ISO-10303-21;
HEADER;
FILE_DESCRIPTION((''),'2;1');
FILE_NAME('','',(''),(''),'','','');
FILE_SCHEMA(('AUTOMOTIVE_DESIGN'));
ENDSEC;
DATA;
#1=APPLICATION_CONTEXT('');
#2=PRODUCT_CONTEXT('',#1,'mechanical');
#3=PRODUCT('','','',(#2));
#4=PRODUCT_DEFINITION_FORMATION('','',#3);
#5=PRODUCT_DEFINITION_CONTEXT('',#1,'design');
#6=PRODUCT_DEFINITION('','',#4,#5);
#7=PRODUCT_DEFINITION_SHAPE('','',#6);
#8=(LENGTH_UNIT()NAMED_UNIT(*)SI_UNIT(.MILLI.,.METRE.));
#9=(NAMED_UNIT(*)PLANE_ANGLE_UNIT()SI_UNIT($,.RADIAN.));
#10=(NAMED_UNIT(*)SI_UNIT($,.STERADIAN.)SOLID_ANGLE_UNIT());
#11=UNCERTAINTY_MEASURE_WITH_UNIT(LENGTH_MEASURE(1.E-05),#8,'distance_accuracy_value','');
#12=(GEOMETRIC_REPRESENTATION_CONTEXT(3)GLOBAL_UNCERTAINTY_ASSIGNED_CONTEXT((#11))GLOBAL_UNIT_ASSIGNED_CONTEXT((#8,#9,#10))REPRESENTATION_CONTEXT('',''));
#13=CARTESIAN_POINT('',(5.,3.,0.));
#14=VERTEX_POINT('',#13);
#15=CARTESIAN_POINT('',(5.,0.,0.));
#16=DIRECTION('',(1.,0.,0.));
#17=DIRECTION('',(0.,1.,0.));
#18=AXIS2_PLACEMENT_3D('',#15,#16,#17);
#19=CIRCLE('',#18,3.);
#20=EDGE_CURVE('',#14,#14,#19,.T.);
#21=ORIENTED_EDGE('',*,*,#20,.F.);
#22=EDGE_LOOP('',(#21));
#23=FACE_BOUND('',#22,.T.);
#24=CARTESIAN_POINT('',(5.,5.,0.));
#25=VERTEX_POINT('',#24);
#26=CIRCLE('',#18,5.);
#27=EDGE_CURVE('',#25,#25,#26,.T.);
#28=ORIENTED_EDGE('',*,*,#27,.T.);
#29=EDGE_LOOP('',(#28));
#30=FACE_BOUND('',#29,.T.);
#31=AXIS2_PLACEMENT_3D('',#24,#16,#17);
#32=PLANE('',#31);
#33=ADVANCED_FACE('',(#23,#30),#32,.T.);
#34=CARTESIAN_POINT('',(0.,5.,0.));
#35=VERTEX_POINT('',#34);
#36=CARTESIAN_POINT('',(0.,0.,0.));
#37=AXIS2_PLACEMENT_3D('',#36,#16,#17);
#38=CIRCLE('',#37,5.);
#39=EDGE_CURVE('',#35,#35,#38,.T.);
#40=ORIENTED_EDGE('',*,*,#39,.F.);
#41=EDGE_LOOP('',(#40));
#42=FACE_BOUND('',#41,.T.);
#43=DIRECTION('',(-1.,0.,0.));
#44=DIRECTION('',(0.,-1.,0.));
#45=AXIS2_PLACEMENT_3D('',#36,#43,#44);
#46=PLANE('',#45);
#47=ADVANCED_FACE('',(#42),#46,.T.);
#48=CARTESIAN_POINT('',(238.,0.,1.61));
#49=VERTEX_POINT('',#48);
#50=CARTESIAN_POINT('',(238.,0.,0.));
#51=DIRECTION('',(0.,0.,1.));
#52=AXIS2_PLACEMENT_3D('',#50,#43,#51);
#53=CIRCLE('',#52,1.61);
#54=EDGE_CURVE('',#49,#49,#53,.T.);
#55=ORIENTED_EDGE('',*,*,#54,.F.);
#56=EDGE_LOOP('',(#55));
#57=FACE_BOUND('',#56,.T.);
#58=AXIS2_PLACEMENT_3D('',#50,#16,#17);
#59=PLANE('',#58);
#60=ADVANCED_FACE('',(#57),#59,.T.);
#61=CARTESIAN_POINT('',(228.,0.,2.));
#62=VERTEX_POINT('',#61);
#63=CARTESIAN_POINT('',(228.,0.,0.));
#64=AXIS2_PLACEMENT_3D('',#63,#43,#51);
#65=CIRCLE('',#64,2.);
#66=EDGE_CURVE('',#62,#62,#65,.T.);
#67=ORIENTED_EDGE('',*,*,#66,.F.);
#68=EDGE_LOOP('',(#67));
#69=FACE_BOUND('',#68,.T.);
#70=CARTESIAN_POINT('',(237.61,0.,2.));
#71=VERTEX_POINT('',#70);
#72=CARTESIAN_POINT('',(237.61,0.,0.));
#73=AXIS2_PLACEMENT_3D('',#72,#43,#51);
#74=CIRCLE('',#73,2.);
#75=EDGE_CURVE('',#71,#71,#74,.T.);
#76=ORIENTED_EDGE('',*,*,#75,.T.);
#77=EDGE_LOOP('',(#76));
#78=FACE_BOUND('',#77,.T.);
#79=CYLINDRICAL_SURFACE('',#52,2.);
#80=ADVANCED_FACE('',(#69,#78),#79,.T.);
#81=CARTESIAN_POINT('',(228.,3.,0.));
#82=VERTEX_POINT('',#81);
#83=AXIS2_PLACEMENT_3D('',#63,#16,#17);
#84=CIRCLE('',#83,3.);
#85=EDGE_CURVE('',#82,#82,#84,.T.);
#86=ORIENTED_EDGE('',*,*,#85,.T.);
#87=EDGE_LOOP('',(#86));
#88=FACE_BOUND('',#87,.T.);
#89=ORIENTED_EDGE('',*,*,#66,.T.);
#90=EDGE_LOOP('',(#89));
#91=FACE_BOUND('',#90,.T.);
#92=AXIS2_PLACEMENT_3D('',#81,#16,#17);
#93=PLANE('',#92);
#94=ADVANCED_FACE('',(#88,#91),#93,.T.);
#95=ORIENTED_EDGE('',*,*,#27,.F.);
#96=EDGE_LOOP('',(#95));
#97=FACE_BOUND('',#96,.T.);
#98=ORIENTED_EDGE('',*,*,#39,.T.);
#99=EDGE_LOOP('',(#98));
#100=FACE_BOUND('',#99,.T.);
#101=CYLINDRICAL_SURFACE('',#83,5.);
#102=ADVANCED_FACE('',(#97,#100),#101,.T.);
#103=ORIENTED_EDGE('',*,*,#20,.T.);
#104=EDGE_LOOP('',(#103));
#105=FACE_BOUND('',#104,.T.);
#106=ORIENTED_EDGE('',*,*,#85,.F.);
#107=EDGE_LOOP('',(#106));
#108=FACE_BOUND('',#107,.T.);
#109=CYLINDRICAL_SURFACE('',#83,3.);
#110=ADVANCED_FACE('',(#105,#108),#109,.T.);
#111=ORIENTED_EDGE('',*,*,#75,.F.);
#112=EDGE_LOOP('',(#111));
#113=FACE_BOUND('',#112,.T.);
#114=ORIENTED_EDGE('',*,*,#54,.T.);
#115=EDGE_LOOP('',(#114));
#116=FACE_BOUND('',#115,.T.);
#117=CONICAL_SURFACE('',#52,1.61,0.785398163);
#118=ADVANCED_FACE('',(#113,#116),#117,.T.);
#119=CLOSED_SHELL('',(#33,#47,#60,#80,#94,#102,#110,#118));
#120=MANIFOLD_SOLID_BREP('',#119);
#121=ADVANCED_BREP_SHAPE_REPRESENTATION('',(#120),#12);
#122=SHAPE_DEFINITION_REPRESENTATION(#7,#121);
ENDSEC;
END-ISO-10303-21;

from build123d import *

# Parameters (mm, degrees)
SKETCH2_R           = 2.75
BOSS_EXTRUDE1_DEPTH = 10


# Read off the part's stored shape, not the designer's step: M4 Machine Threads Stud1
with BuildPart() as part:
    # Sketch1 → Revolve1 (revolve)
    with BuildSketch(Plane.XY):
        Polygon((0, 0), (0, 5), (5, 5), (5, 3), (228, 3), (228, 0), align=None)
    revolve(axis=Axis((228, 0, 0), (-1, 0, 0)))

    # Sketch2 → Boss-Extrude1 (add)
    with BuildSketch(Plane(origin=(228, 0, 0), x_dir=(0, 0, -1), z_dir=(1, 0, 0))):
        with Locations(Location((0, 0, 0), (0, 0, 90))):
            Circle(SKETCH2_R)
    extrude(amount=BOSS_EXTRUDE1_DEPTH)

    # M4 Machine Threads Stud1 outline → M4 Machine Threads Stud1 (revolve, cut)
    with BuildSketch(Plane.YX):
        Polygon((2, 237.61), (2, 228), (2.75, 228), (2.75, 238), (1.61, 238), align=None)
    revolve(axis=Axis((0, 0, 0), (1, 0, 0)), mode=Mode.SUBTRACT)


solid = part.part
